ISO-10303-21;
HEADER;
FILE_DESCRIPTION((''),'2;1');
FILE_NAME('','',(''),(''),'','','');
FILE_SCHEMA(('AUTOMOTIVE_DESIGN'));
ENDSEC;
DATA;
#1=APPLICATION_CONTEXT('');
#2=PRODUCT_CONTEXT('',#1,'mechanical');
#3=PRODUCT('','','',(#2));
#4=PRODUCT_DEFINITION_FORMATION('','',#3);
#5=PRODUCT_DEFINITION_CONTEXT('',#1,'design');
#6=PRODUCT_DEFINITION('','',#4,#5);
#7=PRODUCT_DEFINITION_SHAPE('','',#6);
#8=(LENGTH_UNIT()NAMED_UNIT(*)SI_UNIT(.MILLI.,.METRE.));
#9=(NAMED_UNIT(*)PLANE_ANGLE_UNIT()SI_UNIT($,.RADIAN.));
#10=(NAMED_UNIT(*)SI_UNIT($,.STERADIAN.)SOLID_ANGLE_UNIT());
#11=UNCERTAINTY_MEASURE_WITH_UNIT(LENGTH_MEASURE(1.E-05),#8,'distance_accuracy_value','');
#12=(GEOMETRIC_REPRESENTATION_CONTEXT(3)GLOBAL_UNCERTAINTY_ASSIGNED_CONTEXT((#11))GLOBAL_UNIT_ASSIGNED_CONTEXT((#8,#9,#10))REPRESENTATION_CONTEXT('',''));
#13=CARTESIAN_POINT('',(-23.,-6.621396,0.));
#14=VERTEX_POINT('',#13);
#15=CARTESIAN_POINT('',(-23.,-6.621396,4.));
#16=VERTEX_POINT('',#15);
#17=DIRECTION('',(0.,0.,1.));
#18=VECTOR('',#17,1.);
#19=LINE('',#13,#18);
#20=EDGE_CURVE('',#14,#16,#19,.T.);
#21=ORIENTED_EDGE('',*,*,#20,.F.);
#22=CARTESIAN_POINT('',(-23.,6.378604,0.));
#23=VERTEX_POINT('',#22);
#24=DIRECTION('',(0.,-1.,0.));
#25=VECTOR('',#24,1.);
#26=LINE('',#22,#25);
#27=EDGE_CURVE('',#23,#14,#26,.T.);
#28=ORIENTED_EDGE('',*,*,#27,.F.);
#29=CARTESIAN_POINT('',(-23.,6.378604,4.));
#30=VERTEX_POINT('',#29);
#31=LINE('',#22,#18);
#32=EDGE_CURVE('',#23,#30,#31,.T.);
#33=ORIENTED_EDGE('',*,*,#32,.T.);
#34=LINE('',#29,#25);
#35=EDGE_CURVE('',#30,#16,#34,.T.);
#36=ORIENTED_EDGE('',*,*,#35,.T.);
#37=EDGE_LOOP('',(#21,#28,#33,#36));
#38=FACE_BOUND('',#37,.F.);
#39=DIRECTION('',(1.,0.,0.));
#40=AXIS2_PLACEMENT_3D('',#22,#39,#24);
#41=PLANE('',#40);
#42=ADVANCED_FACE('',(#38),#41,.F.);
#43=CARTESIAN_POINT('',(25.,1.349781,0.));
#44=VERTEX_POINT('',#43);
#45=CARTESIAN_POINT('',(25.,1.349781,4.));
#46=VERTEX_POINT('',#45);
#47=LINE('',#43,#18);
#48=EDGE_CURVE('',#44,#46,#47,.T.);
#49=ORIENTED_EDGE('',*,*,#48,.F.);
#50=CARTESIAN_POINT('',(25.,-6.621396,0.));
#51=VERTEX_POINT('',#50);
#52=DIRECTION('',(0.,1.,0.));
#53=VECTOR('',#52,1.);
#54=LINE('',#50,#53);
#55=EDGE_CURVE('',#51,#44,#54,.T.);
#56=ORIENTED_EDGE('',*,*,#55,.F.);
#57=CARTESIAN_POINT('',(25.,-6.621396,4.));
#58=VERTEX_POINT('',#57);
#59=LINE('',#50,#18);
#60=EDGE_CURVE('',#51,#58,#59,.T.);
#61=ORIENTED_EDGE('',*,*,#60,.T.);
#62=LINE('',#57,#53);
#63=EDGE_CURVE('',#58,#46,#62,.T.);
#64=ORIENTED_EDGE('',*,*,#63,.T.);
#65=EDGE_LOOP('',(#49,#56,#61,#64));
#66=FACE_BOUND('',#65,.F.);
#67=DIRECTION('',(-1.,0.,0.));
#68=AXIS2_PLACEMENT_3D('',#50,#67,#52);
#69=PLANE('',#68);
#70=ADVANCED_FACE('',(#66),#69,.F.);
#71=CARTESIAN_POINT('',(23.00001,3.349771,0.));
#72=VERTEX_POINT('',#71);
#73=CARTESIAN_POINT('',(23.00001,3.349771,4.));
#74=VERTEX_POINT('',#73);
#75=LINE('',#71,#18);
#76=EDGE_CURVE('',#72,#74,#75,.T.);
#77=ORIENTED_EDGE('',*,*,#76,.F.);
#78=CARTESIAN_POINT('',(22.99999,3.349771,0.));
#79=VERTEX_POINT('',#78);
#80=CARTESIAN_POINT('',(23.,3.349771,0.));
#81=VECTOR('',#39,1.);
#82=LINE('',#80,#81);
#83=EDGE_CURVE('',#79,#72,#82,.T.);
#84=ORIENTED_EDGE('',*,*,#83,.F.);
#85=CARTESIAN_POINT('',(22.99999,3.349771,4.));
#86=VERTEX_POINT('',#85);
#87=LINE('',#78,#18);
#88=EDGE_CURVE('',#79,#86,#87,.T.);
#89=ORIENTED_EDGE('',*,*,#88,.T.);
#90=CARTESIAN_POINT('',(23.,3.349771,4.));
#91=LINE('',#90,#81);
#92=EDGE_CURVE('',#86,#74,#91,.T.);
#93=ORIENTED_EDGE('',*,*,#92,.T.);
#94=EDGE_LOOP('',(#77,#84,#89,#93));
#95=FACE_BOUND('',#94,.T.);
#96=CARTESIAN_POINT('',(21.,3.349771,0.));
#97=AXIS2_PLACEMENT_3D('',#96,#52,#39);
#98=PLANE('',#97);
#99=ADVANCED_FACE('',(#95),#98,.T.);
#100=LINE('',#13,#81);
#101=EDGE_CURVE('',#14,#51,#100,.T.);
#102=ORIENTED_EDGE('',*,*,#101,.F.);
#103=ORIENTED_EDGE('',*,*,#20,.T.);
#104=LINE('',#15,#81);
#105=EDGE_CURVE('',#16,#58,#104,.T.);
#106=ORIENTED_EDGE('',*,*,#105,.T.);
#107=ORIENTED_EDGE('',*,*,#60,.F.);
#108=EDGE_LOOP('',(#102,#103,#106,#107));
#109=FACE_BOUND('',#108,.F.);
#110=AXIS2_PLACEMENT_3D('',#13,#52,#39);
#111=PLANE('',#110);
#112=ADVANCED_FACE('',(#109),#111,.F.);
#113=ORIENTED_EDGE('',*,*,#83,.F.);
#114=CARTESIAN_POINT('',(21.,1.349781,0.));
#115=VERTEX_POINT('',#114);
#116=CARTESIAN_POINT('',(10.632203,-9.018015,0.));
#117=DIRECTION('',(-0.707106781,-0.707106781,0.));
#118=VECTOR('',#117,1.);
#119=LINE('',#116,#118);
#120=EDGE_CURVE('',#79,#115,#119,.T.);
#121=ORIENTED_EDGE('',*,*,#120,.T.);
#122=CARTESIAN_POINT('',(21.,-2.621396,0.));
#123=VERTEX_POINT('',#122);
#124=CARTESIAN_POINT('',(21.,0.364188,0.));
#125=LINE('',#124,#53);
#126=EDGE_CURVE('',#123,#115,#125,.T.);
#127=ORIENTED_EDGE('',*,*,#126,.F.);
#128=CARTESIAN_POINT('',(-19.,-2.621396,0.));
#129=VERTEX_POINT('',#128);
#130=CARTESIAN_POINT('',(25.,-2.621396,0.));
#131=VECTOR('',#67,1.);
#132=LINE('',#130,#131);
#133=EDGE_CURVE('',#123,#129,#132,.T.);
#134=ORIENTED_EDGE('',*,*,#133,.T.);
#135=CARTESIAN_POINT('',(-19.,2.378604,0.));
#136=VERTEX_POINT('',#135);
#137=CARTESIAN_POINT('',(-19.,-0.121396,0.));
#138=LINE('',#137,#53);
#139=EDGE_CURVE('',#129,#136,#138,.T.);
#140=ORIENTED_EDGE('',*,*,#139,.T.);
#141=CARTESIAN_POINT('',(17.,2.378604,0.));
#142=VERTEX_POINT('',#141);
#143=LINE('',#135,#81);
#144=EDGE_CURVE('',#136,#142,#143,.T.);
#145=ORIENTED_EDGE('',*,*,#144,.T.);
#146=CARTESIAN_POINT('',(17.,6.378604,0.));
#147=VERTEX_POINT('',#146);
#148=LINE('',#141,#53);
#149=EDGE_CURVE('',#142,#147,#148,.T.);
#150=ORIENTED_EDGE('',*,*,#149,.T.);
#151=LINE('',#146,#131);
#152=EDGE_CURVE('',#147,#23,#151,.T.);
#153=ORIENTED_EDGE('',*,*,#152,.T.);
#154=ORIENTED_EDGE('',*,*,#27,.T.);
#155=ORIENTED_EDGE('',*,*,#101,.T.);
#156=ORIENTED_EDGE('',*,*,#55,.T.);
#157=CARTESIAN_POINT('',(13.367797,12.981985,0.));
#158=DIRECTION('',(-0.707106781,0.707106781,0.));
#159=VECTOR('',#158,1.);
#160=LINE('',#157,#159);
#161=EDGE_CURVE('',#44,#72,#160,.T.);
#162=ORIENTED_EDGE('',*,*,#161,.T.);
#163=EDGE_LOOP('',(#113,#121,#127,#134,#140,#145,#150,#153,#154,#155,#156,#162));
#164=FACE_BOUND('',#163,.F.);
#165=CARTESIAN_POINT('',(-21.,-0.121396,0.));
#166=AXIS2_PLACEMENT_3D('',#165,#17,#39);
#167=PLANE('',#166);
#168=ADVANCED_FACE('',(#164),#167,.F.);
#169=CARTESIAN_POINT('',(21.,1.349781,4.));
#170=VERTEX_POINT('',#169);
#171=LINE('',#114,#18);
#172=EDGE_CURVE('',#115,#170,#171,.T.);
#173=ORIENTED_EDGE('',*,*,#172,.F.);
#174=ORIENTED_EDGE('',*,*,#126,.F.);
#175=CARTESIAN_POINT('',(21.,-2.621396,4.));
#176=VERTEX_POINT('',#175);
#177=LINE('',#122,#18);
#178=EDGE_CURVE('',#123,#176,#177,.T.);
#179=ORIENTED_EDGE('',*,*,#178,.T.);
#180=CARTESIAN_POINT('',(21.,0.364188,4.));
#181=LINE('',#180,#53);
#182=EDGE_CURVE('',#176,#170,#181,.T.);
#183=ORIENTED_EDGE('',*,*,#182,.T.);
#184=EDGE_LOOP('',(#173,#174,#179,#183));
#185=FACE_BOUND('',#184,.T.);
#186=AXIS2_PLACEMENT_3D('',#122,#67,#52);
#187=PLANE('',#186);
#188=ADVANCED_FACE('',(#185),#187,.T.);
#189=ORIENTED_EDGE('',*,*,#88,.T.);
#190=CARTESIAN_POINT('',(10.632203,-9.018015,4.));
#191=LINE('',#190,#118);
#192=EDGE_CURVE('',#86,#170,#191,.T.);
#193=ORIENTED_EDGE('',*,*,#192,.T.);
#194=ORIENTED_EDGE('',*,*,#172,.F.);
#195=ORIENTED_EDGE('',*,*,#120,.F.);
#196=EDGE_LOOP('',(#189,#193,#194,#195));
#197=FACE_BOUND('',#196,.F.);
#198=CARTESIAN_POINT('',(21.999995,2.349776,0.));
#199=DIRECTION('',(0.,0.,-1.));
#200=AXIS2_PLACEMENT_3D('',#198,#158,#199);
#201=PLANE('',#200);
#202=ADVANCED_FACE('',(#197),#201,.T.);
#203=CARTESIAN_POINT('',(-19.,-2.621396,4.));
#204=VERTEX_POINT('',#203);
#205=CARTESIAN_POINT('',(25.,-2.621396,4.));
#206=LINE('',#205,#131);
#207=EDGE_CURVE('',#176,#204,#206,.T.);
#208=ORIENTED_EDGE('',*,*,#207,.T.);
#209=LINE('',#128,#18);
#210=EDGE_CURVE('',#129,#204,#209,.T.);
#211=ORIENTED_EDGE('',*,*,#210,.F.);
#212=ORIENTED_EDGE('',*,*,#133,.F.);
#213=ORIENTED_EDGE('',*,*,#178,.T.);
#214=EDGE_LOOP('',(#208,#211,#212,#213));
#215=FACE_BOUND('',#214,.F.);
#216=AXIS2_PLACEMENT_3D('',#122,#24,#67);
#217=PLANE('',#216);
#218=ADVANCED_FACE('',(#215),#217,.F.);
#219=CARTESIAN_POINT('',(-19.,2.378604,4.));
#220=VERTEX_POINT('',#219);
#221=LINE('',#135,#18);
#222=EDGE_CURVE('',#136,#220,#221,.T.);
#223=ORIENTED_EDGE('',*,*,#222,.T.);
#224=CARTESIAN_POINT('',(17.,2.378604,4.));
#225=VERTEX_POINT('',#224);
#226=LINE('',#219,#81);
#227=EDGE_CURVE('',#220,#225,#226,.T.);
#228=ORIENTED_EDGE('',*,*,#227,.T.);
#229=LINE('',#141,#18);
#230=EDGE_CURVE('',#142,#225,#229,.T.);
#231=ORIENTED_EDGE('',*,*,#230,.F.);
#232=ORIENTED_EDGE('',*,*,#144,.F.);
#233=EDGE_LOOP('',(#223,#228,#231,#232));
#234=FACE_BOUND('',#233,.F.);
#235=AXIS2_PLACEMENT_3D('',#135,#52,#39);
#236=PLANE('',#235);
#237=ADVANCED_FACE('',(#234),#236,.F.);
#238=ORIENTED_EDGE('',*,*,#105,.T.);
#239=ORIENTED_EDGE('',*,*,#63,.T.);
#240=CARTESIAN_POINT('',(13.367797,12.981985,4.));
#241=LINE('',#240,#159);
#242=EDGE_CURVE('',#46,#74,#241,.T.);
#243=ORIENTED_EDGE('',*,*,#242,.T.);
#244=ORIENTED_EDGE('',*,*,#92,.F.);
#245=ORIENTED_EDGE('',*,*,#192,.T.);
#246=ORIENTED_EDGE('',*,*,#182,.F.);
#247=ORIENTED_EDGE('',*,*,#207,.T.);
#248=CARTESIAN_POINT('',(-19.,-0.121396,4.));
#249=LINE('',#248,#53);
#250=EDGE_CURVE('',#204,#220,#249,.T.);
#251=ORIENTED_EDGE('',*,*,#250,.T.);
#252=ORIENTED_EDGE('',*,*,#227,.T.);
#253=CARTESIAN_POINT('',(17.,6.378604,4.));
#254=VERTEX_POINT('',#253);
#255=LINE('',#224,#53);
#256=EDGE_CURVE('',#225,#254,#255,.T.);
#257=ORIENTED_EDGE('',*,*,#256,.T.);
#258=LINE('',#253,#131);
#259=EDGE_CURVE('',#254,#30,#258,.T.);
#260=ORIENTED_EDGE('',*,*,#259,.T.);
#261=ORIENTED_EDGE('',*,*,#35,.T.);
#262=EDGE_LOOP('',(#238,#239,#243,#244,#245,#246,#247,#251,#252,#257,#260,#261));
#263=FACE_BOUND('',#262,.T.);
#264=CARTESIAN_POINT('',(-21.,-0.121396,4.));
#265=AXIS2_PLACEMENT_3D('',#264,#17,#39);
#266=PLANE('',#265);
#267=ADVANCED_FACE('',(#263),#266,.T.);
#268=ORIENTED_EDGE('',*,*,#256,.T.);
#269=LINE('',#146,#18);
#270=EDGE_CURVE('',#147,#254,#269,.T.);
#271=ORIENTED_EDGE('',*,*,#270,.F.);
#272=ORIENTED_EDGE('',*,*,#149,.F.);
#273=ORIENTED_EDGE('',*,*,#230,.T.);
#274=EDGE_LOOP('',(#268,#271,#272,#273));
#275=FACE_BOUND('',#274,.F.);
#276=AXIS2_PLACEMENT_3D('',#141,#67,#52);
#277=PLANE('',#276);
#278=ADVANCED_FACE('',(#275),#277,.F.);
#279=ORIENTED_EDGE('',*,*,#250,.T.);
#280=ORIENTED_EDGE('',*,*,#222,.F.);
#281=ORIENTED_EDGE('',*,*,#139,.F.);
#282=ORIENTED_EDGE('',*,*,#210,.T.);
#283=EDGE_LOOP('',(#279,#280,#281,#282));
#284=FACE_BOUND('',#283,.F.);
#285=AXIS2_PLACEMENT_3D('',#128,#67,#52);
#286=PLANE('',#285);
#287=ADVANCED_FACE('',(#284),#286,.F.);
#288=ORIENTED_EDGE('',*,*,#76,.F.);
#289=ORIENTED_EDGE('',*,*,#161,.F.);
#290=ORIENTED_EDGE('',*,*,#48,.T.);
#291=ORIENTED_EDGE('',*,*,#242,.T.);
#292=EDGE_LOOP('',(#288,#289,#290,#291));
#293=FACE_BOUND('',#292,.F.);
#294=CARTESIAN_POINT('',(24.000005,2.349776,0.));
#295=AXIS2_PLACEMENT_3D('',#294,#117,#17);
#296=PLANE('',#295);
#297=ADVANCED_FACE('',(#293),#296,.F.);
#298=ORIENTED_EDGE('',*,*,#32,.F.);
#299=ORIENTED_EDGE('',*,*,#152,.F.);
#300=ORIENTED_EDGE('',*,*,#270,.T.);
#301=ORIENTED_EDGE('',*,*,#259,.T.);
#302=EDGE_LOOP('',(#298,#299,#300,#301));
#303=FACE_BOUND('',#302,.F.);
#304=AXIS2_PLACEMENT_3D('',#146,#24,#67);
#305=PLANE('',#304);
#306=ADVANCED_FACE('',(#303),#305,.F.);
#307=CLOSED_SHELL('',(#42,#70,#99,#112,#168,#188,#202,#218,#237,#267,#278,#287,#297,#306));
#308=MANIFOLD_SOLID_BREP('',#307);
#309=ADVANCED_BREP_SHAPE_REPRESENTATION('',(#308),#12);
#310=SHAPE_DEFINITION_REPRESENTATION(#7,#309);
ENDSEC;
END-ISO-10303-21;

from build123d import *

# Parameters (mm, degrees)
F0_W     = 4
F0_H     = 5
F0_H_2   = 5.9711672319
F1_DEPTH = 4
F2_SIZE  = 1.99999


# Not quite as in the source:
# - a fillet or chamfer is up to 0.001 mm smaller than in the source, because OpenCascade refuses the exact size


with BuildPart() as f1:
    # F0 (on Top) → F1 (new body)
    with BuildSketch(Plane.XY):
        with Locations((-21, -0.121395904)):
            Rectangle(F0_W, F0_H)
        Polygon((-19, -2.621395904), (-23, -2.621395904), (-23, -6.621395904), (25, -6.621395904), (25, -2.621395904), (21, -2.621395904), align=None)
        Polygon((-23, 6.378604096), (-23, 2.378604096), (-19, 2.378604096), (17, 2.378604096), (17, 6.378604096), align=None)
        with Locations((23, 0.364187712)):
            Rectangle(F0_W, F0_H_2)
    extrude(amount=F1_DEPTH)

    # F2 (size 2 in the source; OpenCascade refuses exactly that, so slightly less here)
    f2_edges = [f1.edges().sort_by_distance(p)[0] for p in [
        (21, 3.349771, 2),
        (25, 3.349771, 2),
    ]]
    chamfer(f2_edges, length=F2_SIZE)


solid = f1.part
